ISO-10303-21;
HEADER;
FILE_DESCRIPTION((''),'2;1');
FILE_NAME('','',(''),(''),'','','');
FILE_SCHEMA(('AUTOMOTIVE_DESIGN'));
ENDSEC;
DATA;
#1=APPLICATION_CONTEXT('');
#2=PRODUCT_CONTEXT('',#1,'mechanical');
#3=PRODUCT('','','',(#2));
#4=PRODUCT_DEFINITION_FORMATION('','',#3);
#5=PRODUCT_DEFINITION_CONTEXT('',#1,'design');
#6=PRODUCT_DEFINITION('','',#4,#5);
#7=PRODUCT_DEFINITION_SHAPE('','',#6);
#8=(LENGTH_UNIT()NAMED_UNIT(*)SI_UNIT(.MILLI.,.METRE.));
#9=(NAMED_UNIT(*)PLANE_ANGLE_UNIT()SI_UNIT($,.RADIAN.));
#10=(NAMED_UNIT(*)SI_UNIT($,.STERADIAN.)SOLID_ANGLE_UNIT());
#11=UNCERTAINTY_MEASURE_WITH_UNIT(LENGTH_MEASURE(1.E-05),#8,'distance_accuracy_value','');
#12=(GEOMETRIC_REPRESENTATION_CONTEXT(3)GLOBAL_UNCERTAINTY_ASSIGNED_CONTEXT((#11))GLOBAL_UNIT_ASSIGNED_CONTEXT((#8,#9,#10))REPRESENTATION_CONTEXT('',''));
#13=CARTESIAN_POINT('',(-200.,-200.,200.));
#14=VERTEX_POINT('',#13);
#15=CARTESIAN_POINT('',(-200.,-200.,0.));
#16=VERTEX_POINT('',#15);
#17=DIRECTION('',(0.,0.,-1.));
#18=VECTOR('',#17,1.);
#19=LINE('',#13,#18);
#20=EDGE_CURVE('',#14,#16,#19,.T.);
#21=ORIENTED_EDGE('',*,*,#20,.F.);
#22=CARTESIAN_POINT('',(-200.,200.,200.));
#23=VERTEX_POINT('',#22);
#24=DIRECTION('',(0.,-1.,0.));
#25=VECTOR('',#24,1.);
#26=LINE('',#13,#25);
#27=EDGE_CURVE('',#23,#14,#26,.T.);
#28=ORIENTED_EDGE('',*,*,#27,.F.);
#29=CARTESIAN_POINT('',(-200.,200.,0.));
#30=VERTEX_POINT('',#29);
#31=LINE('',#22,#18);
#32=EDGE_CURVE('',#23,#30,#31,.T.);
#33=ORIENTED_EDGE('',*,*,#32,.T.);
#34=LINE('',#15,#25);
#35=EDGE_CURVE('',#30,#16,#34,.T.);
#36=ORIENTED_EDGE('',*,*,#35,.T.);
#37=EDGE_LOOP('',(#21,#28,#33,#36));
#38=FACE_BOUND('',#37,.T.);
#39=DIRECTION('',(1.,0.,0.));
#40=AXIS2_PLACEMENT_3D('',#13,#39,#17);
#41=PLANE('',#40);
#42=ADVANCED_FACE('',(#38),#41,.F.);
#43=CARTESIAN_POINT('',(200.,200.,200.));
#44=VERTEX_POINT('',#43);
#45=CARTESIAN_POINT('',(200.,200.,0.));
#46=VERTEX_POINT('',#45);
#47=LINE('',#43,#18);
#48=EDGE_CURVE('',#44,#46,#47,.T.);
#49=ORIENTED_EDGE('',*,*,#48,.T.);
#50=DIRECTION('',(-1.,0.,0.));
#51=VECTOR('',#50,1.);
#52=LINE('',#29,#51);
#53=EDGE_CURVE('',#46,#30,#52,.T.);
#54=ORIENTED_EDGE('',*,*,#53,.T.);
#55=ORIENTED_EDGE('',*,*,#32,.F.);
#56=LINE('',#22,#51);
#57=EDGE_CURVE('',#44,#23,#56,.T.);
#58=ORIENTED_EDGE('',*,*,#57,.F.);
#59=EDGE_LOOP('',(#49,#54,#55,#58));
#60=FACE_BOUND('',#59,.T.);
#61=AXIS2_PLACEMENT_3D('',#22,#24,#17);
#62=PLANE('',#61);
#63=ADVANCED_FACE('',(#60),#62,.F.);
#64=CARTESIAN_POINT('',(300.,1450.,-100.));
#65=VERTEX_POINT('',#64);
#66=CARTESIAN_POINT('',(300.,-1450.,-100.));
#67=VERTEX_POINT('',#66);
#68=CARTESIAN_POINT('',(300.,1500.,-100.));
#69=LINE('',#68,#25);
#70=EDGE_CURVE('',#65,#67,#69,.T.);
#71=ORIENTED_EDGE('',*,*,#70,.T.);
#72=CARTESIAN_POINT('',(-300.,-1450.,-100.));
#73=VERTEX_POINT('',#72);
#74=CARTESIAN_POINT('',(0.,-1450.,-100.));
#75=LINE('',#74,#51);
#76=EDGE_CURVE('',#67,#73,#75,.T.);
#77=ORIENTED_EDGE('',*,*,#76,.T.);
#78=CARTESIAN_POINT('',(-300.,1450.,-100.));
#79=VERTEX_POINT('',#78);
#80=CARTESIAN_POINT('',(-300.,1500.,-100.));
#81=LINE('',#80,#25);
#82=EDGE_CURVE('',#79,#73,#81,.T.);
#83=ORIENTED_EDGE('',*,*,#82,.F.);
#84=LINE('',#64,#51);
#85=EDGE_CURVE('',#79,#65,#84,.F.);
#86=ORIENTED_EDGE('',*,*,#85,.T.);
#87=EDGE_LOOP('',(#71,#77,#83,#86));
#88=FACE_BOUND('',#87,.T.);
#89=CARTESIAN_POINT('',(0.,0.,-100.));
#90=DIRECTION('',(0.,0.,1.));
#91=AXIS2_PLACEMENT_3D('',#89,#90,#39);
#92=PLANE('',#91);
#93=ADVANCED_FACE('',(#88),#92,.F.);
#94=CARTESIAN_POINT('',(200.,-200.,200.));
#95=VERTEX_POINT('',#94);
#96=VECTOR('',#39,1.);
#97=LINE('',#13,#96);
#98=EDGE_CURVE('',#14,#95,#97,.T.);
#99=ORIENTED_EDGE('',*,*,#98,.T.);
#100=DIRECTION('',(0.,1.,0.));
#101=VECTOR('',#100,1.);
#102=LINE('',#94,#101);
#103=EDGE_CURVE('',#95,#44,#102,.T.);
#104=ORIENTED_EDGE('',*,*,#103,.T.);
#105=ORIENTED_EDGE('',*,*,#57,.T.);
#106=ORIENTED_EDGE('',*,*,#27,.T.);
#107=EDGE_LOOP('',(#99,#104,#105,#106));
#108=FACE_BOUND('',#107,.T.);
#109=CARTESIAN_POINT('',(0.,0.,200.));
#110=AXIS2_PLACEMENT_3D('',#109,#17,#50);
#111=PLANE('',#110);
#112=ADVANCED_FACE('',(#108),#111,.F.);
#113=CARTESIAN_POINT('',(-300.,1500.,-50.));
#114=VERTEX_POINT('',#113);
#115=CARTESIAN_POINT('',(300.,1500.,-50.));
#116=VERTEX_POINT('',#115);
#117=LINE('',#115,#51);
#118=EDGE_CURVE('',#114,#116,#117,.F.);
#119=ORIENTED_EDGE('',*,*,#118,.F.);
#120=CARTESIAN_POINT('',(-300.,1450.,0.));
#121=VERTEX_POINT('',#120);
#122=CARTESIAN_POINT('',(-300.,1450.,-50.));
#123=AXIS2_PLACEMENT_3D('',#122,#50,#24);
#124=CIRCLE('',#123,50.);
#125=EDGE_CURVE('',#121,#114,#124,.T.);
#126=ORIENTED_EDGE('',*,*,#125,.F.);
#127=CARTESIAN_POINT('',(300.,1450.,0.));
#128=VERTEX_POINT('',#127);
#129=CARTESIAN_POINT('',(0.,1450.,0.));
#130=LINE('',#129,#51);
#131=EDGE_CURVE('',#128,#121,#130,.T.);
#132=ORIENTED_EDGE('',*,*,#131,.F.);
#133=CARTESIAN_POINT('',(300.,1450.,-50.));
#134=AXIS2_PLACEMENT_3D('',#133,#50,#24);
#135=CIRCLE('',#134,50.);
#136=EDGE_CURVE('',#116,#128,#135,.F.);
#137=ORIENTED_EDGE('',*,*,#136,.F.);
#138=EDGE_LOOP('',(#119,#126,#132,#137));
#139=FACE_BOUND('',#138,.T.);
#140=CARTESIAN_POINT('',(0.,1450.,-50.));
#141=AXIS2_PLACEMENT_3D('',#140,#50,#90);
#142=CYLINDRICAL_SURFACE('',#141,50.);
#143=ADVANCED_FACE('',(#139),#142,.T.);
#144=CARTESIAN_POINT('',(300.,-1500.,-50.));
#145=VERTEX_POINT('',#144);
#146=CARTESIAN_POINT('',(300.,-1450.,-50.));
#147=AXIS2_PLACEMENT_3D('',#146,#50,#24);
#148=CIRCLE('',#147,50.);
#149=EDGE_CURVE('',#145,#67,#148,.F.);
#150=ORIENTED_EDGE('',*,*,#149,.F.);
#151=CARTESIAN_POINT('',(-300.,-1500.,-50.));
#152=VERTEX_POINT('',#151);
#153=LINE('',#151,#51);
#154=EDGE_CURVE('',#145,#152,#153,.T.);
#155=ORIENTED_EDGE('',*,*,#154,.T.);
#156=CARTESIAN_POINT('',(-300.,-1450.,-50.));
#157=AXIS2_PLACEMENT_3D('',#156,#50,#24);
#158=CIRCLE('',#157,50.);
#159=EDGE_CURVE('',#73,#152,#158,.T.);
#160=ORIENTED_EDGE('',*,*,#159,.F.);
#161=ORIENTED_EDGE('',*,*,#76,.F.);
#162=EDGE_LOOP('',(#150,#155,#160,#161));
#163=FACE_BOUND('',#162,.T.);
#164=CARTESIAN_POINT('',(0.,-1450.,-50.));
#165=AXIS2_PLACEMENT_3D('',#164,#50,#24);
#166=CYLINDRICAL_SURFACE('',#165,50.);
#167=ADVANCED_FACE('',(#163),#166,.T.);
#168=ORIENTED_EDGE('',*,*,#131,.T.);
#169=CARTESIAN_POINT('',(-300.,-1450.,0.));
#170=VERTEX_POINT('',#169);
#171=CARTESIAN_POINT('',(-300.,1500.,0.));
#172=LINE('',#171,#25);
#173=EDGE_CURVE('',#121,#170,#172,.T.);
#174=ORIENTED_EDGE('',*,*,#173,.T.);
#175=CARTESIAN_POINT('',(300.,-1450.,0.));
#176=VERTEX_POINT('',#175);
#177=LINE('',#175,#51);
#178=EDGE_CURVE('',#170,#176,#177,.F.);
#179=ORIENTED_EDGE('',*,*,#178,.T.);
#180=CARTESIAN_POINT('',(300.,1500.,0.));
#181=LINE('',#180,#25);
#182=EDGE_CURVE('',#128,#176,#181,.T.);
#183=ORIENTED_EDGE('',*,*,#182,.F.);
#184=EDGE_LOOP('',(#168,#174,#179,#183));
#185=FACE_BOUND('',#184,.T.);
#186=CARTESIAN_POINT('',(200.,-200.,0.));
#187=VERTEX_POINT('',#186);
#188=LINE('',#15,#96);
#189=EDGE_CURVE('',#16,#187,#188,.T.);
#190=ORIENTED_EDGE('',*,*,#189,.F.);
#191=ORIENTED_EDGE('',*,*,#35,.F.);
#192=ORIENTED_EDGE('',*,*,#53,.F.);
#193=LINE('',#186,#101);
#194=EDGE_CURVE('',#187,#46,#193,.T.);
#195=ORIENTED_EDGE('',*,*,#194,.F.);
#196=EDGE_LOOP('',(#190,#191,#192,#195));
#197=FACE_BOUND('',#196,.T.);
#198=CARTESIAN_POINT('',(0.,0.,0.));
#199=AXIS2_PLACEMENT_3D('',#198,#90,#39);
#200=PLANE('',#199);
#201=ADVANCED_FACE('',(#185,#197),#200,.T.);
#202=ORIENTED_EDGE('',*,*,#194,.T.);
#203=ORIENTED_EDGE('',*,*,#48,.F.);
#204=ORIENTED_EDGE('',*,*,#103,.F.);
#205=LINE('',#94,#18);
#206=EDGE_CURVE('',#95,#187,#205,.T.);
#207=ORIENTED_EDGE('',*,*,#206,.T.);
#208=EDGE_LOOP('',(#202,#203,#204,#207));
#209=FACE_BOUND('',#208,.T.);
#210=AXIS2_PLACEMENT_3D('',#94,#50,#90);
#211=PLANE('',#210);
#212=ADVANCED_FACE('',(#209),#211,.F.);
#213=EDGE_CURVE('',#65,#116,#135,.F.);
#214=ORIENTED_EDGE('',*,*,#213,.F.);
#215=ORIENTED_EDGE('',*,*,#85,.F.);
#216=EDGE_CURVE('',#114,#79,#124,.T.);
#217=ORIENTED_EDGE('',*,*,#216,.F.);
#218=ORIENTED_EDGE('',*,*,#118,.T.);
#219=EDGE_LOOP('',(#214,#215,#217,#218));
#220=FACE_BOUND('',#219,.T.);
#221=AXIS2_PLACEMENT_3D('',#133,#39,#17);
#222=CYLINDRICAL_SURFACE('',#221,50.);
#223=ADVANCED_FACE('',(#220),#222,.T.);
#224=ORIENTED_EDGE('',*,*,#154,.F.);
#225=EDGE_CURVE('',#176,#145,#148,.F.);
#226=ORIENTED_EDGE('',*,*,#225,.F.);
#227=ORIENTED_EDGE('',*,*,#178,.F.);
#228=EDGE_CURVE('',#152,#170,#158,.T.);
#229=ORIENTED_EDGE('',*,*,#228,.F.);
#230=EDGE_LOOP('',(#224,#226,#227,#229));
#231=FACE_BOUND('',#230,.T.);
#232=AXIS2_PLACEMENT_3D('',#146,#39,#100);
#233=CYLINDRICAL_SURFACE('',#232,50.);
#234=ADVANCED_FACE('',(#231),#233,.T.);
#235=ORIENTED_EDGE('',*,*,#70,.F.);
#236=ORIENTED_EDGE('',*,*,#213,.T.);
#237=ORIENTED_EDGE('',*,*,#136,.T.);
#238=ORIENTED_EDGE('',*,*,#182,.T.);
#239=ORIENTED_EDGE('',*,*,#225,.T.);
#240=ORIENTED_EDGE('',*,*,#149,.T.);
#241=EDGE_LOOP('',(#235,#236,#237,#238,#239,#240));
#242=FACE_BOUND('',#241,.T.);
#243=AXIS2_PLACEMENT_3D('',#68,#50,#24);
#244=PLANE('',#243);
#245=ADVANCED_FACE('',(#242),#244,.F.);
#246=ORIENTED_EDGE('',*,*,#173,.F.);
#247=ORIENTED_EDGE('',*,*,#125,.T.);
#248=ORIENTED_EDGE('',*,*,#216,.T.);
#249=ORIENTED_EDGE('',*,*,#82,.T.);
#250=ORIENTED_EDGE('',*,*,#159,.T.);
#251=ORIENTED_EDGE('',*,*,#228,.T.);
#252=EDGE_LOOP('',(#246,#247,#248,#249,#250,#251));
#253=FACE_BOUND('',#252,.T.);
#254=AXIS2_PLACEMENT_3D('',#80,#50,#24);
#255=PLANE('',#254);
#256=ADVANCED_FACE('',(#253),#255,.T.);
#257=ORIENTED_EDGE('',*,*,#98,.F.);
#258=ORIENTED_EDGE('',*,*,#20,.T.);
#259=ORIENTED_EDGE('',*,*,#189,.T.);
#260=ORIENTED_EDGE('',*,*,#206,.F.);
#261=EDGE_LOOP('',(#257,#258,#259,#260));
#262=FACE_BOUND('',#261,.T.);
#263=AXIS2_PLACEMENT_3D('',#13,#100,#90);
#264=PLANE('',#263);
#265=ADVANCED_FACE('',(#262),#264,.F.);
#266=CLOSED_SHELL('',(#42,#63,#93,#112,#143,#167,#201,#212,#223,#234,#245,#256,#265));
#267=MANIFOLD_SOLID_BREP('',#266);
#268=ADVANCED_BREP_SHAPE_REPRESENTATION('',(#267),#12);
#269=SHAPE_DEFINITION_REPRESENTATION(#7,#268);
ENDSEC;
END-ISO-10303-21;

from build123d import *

# Parameters (mm, degrees)
SKETCH1_W           = 600
SKETCH1_H           = 3000
BOSS_EXTRUDE2_DEPTH = 100
FILLET2_R           = 50
SKETCH2_W           = 400
SKETCH2_H           = 400
BOSS_EXTRUDE3_DEPTH = 200


with BuildPart() as part:
    # Sketch1 → Boss-Extrude2 (new body)
    with BuildSketch(Plane.XY):
        Rectangle(SKETCH1_W, SKETCH1_H)
    extrude(amount=-BOSS_EXTRUDE2_DEPTH)

    # Fillet2
    fillet2_edges = [part.edges().sort_by_distance(p)[0] for p in [
        (0, 1500, -100),
        (0, 1500, 0),
        (0, -1500, -100),
        (0, -1500, 0),
    ]]
    fillet(fillet2_edges, radius=FILLET2_R - 0.0001)  # a hair under: the kernel refuses the full size

    # Sketch2 → Boss-Extrude3 (add)
    with BuildSketch(Plane.XY):
        Rectangle(SKETCH2_W, SKETCH2_H)
    extrude(amount=BOSS_EXTRUDE3_DEPTH)


solid = part.part
